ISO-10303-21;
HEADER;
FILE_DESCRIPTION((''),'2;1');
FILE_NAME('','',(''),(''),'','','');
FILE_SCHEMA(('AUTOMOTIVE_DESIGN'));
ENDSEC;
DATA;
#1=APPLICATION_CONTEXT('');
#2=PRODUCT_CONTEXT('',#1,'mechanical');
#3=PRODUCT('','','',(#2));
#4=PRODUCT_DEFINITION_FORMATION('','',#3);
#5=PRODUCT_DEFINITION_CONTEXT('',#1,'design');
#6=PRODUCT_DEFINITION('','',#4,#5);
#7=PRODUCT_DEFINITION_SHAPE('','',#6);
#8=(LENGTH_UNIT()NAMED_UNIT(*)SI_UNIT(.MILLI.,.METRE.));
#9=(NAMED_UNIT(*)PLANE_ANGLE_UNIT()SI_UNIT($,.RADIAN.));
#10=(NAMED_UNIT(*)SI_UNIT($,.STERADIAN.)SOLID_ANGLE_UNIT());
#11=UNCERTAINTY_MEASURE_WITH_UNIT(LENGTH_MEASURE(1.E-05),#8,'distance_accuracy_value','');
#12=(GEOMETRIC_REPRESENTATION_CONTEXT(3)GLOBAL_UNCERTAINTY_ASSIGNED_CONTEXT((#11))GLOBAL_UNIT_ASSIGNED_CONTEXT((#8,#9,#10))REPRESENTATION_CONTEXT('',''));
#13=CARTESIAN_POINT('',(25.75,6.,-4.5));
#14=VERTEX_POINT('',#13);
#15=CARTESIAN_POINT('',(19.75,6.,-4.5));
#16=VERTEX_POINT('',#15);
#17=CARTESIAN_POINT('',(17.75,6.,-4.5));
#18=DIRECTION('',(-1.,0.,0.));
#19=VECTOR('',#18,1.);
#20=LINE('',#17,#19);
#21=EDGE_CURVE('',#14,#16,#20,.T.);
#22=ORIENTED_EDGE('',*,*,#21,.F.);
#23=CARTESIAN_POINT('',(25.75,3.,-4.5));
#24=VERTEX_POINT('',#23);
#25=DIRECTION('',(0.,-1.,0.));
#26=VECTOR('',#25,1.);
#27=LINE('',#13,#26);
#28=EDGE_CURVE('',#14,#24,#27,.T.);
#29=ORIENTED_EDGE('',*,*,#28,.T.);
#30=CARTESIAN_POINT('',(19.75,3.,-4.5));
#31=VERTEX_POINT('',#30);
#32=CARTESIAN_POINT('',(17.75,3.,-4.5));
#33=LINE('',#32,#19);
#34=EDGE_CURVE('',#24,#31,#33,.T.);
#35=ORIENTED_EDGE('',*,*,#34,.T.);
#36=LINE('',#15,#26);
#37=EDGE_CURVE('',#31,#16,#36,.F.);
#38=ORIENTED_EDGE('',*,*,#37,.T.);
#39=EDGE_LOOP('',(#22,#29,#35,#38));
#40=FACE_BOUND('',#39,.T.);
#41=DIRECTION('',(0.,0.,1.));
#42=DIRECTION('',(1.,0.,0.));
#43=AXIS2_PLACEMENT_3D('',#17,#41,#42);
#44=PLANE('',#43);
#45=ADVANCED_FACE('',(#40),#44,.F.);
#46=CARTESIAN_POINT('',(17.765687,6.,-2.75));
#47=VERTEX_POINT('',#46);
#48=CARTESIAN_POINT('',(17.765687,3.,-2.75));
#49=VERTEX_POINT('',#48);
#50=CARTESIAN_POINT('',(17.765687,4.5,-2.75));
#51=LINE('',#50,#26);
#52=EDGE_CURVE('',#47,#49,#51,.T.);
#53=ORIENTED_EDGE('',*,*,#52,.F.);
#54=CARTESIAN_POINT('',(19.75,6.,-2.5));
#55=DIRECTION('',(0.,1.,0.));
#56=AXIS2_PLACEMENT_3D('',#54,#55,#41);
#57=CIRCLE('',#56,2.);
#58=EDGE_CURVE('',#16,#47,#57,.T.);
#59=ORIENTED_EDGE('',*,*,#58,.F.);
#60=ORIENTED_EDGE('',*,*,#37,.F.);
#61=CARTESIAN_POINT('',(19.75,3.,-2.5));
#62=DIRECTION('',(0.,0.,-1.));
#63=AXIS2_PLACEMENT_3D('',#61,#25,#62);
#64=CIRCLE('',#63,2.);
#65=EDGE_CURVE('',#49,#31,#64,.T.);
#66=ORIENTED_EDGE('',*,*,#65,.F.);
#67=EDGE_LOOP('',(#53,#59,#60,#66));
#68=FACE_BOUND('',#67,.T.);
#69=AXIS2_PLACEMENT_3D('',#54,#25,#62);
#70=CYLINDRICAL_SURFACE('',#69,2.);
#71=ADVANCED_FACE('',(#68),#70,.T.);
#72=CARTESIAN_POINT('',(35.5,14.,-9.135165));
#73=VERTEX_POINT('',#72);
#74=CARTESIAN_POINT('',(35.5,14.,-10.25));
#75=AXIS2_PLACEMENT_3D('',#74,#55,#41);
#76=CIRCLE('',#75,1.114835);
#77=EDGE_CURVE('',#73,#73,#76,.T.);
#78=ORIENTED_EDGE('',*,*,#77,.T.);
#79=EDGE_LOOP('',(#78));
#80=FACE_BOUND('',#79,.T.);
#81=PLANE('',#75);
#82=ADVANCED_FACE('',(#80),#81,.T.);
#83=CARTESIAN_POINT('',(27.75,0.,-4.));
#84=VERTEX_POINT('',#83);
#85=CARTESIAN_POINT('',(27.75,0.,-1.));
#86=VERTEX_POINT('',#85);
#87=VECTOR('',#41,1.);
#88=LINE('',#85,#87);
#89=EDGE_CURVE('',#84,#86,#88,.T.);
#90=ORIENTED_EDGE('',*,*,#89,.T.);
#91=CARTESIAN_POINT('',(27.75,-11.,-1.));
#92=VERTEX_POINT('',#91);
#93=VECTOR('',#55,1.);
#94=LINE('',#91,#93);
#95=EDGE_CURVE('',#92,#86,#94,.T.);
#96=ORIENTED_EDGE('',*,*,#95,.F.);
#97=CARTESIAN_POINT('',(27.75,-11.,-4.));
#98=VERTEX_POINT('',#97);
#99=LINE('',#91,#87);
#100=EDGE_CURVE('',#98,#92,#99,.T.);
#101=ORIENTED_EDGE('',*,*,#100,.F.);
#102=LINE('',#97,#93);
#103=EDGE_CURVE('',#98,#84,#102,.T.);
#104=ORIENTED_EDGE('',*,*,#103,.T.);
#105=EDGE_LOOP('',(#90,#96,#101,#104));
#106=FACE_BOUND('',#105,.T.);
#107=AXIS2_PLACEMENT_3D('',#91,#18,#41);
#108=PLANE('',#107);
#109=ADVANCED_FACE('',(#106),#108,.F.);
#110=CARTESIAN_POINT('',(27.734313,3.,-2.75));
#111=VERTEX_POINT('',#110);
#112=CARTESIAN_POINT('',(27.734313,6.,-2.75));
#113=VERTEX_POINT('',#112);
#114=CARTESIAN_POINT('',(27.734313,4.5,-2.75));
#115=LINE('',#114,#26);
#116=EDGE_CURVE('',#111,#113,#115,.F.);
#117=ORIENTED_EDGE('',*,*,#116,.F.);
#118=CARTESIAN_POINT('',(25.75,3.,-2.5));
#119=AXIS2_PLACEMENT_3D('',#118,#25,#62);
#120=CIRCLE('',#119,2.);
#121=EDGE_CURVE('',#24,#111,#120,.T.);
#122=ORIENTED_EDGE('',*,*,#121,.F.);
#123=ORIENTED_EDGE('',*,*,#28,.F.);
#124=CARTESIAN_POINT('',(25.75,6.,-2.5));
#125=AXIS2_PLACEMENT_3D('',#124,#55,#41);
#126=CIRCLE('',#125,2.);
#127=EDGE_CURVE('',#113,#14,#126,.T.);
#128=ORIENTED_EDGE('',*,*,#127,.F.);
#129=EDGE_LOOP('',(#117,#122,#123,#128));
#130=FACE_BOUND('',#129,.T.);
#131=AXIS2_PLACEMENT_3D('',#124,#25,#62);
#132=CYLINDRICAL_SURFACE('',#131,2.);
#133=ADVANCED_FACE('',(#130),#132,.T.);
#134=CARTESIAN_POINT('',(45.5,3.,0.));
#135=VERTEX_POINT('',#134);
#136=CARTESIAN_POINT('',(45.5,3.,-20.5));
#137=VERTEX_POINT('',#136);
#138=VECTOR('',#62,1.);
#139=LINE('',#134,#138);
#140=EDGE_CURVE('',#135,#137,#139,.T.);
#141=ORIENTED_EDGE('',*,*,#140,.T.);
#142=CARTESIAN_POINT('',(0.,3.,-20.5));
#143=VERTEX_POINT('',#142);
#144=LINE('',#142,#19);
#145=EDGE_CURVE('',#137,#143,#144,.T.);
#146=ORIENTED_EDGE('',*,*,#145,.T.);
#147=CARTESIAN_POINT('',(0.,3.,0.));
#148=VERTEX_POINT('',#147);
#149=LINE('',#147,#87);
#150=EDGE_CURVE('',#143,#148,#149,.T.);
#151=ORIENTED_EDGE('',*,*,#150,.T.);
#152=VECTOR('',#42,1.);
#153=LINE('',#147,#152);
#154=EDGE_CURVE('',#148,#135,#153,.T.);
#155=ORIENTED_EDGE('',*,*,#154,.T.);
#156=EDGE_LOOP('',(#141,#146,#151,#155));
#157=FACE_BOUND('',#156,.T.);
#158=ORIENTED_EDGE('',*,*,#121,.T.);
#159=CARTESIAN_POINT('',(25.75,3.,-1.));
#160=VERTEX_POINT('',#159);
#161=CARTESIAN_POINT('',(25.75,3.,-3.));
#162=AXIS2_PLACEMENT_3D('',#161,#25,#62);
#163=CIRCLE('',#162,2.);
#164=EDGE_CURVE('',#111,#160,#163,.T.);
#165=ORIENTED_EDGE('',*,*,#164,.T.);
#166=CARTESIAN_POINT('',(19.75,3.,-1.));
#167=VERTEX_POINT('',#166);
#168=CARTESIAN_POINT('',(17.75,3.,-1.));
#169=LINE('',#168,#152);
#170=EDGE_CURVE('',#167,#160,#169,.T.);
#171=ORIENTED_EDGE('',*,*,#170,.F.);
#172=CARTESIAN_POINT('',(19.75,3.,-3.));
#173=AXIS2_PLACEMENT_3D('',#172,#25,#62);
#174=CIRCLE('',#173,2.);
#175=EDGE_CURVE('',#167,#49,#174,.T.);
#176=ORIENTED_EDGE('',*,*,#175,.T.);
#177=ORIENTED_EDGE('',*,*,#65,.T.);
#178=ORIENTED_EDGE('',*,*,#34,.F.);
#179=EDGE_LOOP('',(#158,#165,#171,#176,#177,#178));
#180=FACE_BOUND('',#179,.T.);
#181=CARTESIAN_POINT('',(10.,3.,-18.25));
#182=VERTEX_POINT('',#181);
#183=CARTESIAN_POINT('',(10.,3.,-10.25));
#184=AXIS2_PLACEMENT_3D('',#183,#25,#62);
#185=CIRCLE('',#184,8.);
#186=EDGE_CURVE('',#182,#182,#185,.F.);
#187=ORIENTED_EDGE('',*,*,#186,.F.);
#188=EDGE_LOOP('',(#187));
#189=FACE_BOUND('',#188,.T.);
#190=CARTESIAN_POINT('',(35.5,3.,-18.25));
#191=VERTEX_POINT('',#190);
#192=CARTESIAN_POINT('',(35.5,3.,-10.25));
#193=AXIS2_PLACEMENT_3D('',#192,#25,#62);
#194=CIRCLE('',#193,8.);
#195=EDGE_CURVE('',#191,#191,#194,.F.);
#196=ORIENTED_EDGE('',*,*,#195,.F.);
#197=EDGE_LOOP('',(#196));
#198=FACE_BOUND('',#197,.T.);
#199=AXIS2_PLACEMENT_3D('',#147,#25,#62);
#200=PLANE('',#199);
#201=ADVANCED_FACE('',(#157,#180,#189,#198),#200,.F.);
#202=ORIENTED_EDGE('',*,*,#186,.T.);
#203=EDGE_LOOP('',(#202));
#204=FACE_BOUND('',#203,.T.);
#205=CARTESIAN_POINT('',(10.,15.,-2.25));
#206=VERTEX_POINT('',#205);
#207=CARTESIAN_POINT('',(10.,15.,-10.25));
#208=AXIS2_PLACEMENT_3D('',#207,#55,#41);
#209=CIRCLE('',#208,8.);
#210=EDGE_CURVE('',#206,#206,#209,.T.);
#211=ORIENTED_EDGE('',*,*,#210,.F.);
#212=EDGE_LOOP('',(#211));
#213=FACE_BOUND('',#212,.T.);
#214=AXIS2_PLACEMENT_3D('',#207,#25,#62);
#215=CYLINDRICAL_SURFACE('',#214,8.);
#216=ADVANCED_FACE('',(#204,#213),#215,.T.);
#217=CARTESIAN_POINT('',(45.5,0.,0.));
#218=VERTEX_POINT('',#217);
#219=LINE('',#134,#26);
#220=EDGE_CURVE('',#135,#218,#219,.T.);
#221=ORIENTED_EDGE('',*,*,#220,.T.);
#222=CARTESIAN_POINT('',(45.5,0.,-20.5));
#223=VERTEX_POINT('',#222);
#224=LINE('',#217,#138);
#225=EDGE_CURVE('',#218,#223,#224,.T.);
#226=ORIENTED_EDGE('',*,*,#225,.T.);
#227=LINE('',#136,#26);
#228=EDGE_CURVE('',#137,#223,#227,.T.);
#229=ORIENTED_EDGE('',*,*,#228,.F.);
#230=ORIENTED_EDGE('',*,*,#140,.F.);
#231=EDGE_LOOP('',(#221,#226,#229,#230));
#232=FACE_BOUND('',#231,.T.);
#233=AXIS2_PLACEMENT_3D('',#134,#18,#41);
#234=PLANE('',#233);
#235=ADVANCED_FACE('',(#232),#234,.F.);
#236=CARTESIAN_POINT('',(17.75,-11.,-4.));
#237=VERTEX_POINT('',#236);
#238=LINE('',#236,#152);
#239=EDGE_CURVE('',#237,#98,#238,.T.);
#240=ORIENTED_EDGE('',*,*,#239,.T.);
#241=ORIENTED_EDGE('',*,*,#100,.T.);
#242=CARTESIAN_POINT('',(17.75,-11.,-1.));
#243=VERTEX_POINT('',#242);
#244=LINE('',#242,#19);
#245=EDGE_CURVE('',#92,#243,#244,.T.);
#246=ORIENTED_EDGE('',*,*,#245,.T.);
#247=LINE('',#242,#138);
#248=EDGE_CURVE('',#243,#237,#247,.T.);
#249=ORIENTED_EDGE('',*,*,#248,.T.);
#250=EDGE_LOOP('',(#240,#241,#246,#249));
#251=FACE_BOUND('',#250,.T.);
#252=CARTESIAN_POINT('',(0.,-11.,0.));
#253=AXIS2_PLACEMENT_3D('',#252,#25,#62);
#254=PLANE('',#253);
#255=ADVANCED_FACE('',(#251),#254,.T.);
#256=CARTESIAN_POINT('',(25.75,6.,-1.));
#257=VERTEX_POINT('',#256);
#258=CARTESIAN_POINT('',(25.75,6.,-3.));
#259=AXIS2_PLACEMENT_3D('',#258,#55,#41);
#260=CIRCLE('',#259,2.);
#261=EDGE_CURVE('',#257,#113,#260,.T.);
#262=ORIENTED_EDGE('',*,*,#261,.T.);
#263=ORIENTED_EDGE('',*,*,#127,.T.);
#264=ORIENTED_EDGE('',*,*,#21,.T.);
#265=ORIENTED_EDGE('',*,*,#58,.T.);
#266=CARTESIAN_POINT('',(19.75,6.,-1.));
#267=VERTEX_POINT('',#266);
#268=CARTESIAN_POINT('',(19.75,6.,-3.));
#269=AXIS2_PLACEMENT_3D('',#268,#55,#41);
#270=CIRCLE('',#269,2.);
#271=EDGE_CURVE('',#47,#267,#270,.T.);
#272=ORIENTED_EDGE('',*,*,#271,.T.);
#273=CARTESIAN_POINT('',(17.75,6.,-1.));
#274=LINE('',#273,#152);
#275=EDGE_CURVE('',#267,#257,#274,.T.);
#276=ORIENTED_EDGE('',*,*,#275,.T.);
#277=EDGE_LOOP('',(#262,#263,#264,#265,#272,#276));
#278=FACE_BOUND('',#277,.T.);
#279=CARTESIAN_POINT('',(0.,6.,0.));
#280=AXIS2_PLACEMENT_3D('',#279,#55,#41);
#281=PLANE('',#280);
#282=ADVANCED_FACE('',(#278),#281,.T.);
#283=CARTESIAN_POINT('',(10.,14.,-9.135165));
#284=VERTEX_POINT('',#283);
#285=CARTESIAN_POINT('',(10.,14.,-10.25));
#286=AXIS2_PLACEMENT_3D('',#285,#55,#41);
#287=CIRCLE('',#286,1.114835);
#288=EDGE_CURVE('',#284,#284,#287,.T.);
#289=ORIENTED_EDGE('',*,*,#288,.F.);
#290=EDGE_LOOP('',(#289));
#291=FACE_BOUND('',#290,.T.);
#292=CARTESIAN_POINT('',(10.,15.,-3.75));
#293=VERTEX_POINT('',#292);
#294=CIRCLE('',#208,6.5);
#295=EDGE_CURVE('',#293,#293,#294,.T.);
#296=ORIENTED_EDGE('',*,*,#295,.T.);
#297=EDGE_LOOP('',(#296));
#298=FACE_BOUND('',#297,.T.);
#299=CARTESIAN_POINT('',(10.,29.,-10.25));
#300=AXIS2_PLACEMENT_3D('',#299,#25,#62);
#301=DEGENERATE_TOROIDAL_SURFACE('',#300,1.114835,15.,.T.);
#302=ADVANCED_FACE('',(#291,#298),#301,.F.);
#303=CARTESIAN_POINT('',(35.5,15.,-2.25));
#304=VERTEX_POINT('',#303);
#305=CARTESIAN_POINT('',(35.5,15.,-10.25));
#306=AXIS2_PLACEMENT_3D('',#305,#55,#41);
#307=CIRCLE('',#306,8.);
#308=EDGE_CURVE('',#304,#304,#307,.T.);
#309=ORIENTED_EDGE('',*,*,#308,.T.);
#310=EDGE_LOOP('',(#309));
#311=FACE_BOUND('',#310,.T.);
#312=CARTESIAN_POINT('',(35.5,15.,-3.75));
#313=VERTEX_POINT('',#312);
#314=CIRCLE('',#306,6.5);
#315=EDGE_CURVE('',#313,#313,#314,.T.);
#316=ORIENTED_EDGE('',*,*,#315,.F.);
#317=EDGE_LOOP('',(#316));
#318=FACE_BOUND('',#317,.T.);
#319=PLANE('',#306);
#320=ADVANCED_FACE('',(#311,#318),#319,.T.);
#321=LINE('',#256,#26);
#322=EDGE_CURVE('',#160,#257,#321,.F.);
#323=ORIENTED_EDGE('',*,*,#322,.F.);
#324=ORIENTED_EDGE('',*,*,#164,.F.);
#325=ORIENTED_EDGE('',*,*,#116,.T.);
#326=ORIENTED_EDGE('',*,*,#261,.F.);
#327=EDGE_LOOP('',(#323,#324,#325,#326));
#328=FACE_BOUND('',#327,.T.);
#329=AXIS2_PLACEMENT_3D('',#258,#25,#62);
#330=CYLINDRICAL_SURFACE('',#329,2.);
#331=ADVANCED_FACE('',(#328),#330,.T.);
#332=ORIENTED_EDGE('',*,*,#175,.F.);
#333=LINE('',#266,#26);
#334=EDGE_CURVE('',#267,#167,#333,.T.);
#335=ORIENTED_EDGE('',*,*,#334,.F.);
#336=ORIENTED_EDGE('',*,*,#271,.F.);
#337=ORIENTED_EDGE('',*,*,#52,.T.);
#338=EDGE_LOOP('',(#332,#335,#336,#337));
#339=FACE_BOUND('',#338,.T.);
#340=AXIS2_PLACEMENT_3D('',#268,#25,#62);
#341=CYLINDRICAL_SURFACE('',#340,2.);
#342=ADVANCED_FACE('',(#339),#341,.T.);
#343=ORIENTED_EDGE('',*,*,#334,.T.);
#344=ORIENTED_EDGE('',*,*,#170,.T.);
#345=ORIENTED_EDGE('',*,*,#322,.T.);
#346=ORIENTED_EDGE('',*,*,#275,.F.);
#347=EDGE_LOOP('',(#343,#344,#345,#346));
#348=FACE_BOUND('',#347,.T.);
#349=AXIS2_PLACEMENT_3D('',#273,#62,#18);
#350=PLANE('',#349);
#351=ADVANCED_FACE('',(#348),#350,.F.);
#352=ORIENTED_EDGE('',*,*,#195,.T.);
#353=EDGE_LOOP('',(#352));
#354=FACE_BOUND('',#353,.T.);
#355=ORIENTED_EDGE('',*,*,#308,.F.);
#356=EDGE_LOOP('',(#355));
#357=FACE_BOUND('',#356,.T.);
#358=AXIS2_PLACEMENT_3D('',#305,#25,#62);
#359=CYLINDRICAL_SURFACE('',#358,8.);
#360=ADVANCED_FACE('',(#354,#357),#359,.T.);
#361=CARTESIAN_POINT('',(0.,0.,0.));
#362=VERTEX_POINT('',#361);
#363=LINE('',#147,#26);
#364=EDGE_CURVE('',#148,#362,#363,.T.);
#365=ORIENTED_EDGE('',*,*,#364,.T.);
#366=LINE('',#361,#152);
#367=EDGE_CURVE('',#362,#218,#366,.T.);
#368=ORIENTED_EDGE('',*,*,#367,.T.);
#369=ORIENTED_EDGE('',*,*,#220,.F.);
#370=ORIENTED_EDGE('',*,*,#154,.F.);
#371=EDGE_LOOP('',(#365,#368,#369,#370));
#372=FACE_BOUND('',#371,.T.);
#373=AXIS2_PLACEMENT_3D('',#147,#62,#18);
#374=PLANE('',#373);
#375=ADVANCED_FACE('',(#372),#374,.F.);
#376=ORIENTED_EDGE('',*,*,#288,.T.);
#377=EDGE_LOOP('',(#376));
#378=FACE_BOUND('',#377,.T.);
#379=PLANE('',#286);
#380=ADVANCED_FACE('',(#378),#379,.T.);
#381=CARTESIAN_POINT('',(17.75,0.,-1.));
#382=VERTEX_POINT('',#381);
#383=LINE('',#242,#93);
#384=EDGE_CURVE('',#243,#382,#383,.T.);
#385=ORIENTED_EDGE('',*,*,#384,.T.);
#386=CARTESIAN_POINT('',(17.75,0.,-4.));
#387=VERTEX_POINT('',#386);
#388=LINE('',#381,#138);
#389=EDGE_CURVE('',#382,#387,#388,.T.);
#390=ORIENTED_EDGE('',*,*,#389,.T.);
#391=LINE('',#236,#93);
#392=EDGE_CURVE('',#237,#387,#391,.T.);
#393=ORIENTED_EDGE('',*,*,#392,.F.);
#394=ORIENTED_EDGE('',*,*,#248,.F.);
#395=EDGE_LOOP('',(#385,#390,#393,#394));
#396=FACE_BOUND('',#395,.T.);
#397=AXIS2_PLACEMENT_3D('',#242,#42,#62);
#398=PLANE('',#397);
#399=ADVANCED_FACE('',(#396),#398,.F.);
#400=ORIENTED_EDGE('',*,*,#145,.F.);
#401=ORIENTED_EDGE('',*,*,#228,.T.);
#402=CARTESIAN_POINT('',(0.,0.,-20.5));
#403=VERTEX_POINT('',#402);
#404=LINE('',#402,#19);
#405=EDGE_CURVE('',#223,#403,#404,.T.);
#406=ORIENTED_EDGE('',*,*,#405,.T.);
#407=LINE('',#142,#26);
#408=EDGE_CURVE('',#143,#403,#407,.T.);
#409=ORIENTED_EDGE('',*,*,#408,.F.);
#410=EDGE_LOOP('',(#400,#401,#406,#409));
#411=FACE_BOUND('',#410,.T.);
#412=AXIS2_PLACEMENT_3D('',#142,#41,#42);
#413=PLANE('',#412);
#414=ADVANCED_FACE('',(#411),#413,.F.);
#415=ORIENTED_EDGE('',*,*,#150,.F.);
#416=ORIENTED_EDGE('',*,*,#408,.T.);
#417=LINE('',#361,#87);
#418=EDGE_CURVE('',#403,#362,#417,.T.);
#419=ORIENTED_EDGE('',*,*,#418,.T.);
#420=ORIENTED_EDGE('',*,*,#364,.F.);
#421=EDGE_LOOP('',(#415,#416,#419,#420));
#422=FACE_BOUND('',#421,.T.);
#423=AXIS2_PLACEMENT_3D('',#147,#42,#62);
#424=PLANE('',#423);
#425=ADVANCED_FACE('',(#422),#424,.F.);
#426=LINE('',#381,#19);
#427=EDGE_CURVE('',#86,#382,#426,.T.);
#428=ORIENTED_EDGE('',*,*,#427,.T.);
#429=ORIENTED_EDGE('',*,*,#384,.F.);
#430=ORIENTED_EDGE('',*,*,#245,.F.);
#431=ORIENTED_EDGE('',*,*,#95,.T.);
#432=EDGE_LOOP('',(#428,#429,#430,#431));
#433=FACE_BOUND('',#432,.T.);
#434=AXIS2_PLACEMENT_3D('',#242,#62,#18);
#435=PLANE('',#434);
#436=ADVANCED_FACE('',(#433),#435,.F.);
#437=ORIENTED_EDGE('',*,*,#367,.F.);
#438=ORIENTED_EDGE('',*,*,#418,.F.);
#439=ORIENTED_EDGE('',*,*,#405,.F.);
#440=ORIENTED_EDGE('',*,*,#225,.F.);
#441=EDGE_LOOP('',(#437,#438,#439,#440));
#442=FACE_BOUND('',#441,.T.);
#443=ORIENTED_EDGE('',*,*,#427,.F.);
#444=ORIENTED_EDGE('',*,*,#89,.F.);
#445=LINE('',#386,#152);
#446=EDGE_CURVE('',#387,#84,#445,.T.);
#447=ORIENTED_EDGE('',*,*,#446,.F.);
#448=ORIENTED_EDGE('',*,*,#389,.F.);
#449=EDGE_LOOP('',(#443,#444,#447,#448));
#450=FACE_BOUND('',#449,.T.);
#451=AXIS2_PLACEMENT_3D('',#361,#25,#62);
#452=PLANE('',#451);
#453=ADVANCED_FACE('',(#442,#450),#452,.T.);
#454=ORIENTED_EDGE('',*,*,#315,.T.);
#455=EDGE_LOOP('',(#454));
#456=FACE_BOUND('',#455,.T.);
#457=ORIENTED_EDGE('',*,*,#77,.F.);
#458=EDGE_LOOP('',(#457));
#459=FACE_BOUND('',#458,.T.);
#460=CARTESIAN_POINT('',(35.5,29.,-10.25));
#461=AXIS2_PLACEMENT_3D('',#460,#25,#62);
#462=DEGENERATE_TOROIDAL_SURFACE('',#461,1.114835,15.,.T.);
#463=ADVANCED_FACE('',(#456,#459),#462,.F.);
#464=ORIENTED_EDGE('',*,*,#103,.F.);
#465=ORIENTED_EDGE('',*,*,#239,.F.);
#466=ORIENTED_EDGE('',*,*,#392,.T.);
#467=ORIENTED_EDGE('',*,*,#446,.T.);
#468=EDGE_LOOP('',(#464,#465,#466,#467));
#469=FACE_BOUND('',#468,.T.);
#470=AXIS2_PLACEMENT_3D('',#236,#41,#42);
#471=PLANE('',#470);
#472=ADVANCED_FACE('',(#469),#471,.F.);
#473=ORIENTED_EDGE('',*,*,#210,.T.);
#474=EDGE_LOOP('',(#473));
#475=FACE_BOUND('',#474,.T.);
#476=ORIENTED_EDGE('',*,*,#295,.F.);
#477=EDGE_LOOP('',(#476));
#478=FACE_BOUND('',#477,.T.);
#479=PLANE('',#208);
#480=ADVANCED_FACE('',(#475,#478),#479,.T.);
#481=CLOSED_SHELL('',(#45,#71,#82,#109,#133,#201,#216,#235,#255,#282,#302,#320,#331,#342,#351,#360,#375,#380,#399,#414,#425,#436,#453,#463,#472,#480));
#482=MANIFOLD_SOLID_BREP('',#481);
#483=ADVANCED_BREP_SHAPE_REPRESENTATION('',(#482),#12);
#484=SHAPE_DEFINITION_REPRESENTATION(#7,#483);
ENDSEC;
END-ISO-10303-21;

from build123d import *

# Parameters (mm, degrees)
SKETCH1_W           = 45.5
SKETCH1_H           = 20.5
BOSS_EXTRUDE1_DEPTH = 3
SKETCH2_R           = 8
BOSS_EXTRUDE2_DEPTH = 12
SKETCH3_W           = 10
SKETCH3_H           = 3
BOSS_EXTRUDE3_DEPTH = 11
SKETCH4_R           = 6.5
CUT_EXTRUDE1_DEPTH  = 1
FILLET1_R           = 15
SKETCH5_W           = 10
SKETCH5_H           = 3.5
BOSS_EXTRUDE4_DEPTH = 3
FILLET2_R           = 2


with BuildPart() as part:
    # Sketch1 → Boss-Extrude1 (new body)
    with BuildSketch(Plane(origin=(0, 0, 0), x_dir=(1, 0, 0), z_dir=(0, 1, 0))):
        with Locations((22.75, 10.25)):
            Rectangle(SKETCH1_W, SKETCH1_H)
    extrude(amount=BOSS_EXTRUDE1_DEPTH)

    # Sketch2 → Boss-Extrude2 (add)
    with BuildSketch(Plane(origin=(0, 3, 0), x_dir=(1, 0, 0), z_dir=(0, 1, 0))):
        with Locations(Location((10, 10.25, 0), (0, 0, 90))):
            Circle(SKETCH2_R)
        with Locations(Location((35.5, 10.25, 0), (0, 0, 90))):
            Circle(SKETCH2_R)
    extrude(amount=BOSS_EXTRUDE2_DEPTH)

    # Sketch3 → Boss-Extrude3 (add)
    with BuildSketch(Plane.XZ):
        with Locations((22.75, -2.5)):
            Rectangle(SKETCH3_W, SKETCH3_H)
    extrude(amount=BOSS_EXTRUDE3_DEPTH)

    # Sketch4 → Cut-Extrude1 (cut)
    with BuildSketch(Plane(origin=(0, 15, 0), x_dir=(1, 0, 0), z_dir=(0, 1, 0))):
        with Locations(Location((10, 10.25, 0), (0, 0, 270))):
            Circle(SKETCH4_R)
        with Locations(Location((35.5, 10.25, 0), (0, 0, 270))):
            Circle(SKETCH4_R)
    extrude(amount=-CUT_EXTRUDE1_DEPTH, mode=Mode.SUBTRACT)

    # Fillet1
    # the kernel refuses this fillet: 15 mm, written as the material it adds along each edge
    with BuildSketch(Plane(origin=(10, 14, -10.25), x_dir=(0, 0, 1), z_dir=(-1, 0, 0))) as fillet1_piece_1:
        with BuildLine():
            CenterArc((1.114835193, 15), FILLET1_R, 270, 21.039469781)
            Line((1.114835193, 0), (1.114835193, -0.3))
            Line((1.114835193, -0.3), (6.5, -0.3))
            Line((6.5, -0.3), (6.8, 0))
            ThreePointArc((6.8, 0), (6.8, 0.5), (6.607703296, 0.72))
            Line((6.607703296, 0.72), (6.5, 1))
        make_face()
    revolve(axis=Axis((10, 14, -10.25), (0, 1, 0)))
    with BuildSketch(Plane(origin=(35.5, 14, -10.25), x_dir=(0, 0, 1), z_dir=(-1, 0, 0))) as fillet1_piece_2:
        with BuildLine():
            CenterArc((1.114835193, 15), FILLET1_R, 270, 21.039469781)
            Line((1.114835193, 0), (1.114835193, -0.3))
            Line((1.114835193, -0.3), (6.5, -0.3))
            Line((6.5, -0.3), (6.8, 0))
            ThreePointArc((6.8, 0), (6.8, 0.5), (6.607703296, 0.72))
            Line((6.607703296, 0.72), (6.5, 1))
        make_face()
    revolve(axis=Axis((35.5, 14, -10.25), (0, 1, 0)))

    # Sketch5 → Boss-Extrude4 (add)
    with BuildSketch(Plane(origin=(0, 3, 0), x_dir=(1, 0, 0), z_dir=(0, 1, 0))):
        with Locations((22.75, 2.75)):
            Rectangle(SKETCH5_W, SKETCH5_H)
    extrude(amount=BOSS_EXTRUDE4_DEPTH)

    # Fillet2
    # the kernel refuses this fillet: 2 mm, written as the material it takes off along each edge
    with BuildSketch(Plane(origin=(17.75, 3, -1), x_dir=(0, 0, -1), z_dir=(0, 1, 0)), Plane(origin=(27.75, 3, -1), x_dir=(-1, 0, 0), z_dir=(0, 1, 0)), Plane(origin=(27.75, 3, -4.5), x_dir=(0, 0, 1), z_dir=(0, 1, 0))) as fillet2_piece_1:
        with BuildLine():
            CenterArc((FILLET2_R, -FILLET2_R), FILLET2_R, 90, 90)
            Line((0, -FILLET2_R), (0, 0))
            Line((0, 0), (FILLET2_R, 0))
        make_face()
    extrude(amount=8, mode=Mode.SUBTRACT)
    with BuildSketch(Plane(origin=(17.75, 3, -4.5), x_dir=(0, 0, 1), z_dir=(0, 1, 0))) as fillet2_piece_2:
        with BuildLine():
            CenterArc((FILLET2_R, FILLET2_R), FILLET2_R, 180, 90)
            Line((0, FILLET2_R), (0, 0))
            Line((0, 0), (FILLET2_R, 0))
        make_face()
    extrude(amount=8, mode=Mode.SUBTRACT)


solid = part.part
